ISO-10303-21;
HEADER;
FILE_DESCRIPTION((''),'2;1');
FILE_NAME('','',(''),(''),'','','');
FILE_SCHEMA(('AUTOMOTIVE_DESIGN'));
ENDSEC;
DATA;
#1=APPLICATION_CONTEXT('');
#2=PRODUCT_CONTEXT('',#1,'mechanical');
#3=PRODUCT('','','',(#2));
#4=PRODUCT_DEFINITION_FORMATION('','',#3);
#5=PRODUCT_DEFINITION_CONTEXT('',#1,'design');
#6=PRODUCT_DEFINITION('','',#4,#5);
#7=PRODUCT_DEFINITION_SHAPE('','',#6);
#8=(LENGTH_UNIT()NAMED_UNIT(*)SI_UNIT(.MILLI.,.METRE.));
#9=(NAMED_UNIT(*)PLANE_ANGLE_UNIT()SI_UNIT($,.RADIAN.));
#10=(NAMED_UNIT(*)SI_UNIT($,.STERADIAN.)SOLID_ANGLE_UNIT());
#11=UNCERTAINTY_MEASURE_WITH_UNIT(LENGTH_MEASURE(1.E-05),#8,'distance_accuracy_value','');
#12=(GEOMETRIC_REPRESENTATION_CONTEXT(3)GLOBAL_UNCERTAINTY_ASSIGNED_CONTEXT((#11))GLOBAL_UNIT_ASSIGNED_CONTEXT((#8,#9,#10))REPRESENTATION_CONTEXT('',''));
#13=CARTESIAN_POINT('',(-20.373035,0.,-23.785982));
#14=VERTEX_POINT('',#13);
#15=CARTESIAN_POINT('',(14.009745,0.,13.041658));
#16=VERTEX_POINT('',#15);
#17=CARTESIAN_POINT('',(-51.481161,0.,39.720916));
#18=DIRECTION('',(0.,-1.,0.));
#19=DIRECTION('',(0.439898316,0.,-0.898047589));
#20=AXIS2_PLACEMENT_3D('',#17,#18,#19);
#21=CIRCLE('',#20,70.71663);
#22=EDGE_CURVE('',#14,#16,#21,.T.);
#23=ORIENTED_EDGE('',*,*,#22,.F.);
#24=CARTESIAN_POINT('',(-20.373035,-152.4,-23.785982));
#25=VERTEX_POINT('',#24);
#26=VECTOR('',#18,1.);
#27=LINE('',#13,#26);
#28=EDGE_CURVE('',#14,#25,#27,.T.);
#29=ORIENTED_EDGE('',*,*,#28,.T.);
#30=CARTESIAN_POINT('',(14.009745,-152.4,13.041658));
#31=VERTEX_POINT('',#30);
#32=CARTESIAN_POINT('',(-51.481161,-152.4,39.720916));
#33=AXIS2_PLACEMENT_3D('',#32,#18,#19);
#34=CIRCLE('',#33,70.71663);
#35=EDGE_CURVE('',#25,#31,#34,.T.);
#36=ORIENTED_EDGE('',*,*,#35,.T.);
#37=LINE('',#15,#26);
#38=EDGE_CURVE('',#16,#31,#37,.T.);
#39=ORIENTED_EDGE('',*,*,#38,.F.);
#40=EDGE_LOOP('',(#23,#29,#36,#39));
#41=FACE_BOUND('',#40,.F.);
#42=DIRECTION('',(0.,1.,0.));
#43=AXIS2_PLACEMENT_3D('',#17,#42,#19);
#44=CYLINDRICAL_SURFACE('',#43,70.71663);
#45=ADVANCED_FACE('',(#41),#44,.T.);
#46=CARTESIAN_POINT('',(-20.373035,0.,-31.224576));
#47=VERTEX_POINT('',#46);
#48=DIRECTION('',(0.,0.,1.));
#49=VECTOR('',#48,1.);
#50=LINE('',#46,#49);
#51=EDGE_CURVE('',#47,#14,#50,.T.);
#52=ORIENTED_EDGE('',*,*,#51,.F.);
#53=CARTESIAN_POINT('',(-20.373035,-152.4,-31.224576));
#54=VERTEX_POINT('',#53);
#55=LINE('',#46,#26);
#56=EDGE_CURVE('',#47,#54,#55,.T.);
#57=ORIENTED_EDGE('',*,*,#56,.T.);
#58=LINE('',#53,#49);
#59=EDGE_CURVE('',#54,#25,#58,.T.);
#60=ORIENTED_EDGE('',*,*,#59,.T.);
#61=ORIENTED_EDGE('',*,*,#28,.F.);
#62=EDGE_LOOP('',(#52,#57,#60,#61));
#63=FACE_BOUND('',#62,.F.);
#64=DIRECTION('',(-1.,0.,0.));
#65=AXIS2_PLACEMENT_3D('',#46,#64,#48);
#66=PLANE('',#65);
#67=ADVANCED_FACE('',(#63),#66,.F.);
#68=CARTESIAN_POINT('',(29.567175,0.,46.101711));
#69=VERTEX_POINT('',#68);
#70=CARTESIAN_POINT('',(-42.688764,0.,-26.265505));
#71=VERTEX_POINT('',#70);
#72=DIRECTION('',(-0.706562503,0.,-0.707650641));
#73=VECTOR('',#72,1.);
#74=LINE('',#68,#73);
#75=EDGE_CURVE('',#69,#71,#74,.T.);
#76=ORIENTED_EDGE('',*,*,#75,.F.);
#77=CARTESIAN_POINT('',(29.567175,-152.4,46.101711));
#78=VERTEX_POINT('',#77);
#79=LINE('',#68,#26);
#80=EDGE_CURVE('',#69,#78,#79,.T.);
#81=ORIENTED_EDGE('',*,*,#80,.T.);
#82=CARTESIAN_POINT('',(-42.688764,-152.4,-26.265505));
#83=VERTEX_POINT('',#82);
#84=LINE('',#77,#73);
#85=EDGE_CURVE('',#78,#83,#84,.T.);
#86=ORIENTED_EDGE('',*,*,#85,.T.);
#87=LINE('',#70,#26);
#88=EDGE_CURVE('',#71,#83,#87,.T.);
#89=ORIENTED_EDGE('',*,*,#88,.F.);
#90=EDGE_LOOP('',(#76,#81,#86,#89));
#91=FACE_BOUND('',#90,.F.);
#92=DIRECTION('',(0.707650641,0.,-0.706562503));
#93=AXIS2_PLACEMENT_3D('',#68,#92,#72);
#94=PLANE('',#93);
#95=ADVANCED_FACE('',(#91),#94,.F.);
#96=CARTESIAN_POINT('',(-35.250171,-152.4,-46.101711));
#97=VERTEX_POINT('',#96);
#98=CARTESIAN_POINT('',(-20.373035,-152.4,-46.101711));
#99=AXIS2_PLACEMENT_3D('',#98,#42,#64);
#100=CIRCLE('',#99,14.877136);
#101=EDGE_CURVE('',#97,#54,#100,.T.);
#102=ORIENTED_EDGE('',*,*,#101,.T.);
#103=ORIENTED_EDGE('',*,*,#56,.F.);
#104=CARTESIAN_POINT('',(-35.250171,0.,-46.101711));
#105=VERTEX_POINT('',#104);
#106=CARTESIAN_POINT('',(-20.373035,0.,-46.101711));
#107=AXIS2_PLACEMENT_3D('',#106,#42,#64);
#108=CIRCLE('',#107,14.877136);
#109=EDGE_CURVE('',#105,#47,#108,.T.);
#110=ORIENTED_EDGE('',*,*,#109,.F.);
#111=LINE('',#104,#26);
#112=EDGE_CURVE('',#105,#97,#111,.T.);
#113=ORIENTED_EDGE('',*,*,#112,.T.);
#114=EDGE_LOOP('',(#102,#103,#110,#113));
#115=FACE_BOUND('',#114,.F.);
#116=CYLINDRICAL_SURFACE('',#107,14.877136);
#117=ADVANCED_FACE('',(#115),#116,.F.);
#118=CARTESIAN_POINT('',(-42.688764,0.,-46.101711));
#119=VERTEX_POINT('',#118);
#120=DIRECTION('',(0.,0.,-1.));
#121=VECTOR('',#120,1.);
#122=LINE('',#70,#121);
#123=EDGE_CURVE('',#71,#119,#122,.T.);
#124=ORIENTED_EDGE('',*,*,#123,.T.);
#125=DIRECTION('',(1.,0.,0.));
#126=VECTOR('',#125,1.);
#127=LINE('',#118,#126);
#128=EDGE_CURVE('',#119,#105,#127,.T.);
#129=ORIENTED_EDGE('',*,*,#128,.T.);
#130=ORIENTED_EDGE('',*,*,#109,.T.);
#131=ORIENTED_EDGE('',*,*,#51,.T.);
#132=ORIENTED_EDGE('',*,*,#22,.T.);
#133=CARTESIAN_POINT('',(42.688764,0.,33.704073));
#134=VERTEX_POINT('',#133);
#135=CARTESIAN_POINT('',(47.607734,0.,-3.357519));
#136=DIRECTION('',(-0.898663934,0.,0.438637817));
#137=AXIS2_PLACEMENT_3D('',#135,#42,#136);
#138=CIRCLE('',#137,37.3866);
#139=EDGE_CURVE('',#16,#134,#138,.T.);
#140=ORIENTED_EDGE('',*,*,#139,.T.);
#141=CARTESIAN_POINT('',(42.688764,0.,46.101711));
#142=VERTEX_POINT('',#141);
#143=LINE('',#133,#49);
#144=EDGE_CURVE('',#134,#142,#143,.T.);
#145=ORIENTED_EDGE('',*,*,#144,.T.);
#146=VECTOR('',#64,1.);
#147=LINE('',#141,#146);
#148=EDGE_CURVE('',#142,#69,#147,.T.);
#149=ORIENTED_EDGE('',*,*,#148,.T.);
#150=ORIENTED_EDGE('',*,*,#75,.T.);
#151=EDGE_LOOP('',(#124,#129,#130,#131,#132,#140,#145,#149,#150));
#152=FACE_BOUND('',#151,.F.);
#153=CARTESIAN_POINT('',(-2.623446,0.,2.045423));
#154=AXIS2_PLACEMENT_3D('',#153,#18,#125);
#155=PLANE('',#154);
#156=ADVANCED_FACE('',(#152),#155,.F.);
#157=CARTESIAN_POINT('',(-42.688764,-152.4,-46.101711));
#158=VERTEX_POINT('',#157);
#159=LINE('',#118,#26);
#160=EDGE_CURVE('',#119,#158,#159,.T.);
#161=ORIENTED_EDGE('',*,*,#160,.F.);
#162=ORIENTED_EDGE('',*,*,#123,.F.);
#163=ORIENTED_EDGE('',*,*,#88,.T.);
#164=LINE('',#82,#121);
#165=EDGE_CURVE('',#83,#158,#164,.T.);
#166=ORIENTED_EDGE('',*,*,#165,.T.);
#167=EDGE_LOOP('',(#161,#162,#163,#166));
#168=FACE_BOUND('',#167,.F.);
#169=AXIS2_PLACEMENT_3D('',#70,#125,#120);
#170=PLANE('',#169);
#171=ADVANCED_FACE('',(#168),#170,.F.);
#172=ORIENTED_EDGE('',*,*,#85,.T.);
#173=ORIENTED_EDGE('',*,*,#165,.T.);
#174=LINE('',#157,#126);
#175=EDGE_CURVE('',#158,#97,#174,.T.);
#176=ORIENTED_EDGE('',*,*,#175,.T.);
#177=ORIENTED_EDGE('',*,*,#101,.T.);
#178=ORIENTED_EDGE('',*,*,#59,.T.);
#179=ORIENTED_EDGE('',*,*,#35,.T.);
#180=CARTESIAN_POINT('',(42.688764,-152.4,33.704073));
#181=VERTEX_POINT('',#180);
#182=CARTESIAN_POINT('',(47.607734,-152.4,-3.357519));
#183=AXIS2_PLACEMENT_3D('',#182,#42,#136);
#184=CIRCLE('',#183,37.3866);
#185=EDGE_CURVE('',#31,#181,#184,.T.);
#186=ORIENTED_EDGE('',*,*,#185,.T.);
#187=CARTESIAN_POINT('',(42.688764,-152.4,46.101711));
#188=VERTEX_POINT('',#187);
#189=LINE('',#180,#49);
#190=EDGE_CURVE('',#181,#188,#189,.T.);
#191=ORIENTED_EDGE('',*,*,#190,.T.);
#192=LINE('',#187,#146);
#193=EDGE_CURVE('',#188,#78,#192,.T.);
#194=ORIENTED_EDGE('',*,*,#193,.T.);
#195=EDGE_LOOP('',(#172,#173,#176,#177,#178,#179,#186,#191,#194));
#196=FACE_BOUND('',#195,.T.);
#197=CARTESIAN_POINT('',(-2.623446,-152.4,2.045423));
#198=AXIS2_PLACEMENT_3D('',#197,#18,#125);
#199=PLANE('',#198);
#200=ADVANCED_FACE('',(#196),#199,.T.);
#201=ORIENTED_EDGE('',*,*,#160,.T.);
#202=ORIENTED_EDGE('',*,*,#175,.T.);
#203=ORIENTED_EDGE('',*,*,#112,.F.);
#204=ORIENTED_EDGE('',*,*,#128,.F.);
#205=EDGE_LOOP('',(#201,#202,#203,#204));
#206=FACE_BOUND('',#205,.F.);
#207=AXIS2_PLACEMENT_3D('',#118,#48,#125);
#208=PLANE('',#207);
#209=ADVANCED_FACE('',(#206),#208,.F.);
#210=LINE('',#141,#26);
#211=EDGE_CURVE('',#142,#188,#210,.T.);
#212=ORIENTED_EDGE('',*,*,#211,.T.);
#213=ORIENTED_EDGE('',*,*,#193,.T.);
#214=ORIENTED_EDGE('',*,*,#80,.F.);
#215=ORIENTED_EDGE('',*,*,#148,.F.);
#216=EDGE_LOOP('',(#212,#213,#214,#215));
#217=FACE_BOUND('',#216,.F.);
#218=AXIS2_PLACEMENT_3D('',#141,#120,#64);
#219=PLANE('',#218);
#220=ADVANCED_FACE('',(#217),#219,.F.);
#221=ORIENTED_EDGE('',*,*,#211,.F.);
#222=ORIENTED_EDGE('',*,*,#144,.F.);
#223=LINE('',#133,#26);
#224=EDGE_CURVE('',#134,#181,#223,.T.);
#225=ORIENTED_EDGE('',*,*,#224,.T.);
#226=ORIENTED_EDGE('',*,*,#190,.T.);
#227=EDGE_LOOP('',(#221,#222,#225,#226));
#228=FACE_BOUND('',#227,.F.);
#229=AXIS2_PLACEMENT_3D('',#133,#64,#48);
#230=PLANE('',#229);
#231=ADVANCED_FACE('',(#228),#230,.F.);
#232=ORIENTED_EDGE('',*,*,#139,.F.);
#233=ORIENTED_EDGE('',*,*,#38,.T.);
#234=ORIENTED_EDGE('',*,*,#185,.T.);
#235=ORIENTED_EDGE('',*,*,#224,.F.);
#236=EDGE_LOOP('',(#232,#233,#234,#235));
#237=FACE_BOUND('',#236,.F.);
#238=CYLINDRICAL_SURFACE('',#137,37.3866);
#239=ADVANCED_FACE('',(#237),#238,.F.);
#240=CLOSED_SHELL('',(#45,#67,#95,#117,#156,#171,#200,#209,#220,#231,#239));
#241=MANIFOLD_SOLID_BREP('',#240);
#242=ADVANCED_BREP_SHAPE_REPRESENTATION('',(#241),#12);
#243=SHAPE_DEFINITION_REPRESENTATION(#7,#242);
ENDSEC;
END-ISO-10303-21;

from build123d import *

# Parameters (mm, degrees)
F1_DEPTH = 152.4


# Not quite as in the source:
# - ends of sketch curves that miss each other by under 0.0002 mm in the source are joined


with BuildPart() as f1:
    # F0 (on Front) → F1 (new body)
    with BuildSketch(Plane.XZ):
        with BuildLine():
            Line((42.688764, 33.7040728), (42.688764, 46.1017112))
            Line((42.688764, 46.1017112), (29.5671748, 46.1017112))
            Line((29.5671748, 46.1017112), (-42.688764, -26.265505))
            Line((-42.688764, -26.265505), (-42.688764, -46.1017112))
            Line((-42.688764, -46.1017112), (-35.2501708, -46.1017112))
            ThreePointArc((-35.2501708, -46.1017112), (-30.8927586674, -35.5819877326), (-20.3730352, -31.2245756))
            Line((-20.3730352, -31.2245756), (-20.3730352, -23.7859824))
            ThreePointArc((-20.3730352, -23.7859824), (0.2093797229, -8.5380689207), (14.0097452821, 13.0416577293))
            ThreePointArc((14.0097452821, 13.0416577293), (25.7531505711, 26.9762086577), (42.688764, 33.7040728))
        make_face()
    extrude(amount=F1_DEPTH)


solid = f1.part
